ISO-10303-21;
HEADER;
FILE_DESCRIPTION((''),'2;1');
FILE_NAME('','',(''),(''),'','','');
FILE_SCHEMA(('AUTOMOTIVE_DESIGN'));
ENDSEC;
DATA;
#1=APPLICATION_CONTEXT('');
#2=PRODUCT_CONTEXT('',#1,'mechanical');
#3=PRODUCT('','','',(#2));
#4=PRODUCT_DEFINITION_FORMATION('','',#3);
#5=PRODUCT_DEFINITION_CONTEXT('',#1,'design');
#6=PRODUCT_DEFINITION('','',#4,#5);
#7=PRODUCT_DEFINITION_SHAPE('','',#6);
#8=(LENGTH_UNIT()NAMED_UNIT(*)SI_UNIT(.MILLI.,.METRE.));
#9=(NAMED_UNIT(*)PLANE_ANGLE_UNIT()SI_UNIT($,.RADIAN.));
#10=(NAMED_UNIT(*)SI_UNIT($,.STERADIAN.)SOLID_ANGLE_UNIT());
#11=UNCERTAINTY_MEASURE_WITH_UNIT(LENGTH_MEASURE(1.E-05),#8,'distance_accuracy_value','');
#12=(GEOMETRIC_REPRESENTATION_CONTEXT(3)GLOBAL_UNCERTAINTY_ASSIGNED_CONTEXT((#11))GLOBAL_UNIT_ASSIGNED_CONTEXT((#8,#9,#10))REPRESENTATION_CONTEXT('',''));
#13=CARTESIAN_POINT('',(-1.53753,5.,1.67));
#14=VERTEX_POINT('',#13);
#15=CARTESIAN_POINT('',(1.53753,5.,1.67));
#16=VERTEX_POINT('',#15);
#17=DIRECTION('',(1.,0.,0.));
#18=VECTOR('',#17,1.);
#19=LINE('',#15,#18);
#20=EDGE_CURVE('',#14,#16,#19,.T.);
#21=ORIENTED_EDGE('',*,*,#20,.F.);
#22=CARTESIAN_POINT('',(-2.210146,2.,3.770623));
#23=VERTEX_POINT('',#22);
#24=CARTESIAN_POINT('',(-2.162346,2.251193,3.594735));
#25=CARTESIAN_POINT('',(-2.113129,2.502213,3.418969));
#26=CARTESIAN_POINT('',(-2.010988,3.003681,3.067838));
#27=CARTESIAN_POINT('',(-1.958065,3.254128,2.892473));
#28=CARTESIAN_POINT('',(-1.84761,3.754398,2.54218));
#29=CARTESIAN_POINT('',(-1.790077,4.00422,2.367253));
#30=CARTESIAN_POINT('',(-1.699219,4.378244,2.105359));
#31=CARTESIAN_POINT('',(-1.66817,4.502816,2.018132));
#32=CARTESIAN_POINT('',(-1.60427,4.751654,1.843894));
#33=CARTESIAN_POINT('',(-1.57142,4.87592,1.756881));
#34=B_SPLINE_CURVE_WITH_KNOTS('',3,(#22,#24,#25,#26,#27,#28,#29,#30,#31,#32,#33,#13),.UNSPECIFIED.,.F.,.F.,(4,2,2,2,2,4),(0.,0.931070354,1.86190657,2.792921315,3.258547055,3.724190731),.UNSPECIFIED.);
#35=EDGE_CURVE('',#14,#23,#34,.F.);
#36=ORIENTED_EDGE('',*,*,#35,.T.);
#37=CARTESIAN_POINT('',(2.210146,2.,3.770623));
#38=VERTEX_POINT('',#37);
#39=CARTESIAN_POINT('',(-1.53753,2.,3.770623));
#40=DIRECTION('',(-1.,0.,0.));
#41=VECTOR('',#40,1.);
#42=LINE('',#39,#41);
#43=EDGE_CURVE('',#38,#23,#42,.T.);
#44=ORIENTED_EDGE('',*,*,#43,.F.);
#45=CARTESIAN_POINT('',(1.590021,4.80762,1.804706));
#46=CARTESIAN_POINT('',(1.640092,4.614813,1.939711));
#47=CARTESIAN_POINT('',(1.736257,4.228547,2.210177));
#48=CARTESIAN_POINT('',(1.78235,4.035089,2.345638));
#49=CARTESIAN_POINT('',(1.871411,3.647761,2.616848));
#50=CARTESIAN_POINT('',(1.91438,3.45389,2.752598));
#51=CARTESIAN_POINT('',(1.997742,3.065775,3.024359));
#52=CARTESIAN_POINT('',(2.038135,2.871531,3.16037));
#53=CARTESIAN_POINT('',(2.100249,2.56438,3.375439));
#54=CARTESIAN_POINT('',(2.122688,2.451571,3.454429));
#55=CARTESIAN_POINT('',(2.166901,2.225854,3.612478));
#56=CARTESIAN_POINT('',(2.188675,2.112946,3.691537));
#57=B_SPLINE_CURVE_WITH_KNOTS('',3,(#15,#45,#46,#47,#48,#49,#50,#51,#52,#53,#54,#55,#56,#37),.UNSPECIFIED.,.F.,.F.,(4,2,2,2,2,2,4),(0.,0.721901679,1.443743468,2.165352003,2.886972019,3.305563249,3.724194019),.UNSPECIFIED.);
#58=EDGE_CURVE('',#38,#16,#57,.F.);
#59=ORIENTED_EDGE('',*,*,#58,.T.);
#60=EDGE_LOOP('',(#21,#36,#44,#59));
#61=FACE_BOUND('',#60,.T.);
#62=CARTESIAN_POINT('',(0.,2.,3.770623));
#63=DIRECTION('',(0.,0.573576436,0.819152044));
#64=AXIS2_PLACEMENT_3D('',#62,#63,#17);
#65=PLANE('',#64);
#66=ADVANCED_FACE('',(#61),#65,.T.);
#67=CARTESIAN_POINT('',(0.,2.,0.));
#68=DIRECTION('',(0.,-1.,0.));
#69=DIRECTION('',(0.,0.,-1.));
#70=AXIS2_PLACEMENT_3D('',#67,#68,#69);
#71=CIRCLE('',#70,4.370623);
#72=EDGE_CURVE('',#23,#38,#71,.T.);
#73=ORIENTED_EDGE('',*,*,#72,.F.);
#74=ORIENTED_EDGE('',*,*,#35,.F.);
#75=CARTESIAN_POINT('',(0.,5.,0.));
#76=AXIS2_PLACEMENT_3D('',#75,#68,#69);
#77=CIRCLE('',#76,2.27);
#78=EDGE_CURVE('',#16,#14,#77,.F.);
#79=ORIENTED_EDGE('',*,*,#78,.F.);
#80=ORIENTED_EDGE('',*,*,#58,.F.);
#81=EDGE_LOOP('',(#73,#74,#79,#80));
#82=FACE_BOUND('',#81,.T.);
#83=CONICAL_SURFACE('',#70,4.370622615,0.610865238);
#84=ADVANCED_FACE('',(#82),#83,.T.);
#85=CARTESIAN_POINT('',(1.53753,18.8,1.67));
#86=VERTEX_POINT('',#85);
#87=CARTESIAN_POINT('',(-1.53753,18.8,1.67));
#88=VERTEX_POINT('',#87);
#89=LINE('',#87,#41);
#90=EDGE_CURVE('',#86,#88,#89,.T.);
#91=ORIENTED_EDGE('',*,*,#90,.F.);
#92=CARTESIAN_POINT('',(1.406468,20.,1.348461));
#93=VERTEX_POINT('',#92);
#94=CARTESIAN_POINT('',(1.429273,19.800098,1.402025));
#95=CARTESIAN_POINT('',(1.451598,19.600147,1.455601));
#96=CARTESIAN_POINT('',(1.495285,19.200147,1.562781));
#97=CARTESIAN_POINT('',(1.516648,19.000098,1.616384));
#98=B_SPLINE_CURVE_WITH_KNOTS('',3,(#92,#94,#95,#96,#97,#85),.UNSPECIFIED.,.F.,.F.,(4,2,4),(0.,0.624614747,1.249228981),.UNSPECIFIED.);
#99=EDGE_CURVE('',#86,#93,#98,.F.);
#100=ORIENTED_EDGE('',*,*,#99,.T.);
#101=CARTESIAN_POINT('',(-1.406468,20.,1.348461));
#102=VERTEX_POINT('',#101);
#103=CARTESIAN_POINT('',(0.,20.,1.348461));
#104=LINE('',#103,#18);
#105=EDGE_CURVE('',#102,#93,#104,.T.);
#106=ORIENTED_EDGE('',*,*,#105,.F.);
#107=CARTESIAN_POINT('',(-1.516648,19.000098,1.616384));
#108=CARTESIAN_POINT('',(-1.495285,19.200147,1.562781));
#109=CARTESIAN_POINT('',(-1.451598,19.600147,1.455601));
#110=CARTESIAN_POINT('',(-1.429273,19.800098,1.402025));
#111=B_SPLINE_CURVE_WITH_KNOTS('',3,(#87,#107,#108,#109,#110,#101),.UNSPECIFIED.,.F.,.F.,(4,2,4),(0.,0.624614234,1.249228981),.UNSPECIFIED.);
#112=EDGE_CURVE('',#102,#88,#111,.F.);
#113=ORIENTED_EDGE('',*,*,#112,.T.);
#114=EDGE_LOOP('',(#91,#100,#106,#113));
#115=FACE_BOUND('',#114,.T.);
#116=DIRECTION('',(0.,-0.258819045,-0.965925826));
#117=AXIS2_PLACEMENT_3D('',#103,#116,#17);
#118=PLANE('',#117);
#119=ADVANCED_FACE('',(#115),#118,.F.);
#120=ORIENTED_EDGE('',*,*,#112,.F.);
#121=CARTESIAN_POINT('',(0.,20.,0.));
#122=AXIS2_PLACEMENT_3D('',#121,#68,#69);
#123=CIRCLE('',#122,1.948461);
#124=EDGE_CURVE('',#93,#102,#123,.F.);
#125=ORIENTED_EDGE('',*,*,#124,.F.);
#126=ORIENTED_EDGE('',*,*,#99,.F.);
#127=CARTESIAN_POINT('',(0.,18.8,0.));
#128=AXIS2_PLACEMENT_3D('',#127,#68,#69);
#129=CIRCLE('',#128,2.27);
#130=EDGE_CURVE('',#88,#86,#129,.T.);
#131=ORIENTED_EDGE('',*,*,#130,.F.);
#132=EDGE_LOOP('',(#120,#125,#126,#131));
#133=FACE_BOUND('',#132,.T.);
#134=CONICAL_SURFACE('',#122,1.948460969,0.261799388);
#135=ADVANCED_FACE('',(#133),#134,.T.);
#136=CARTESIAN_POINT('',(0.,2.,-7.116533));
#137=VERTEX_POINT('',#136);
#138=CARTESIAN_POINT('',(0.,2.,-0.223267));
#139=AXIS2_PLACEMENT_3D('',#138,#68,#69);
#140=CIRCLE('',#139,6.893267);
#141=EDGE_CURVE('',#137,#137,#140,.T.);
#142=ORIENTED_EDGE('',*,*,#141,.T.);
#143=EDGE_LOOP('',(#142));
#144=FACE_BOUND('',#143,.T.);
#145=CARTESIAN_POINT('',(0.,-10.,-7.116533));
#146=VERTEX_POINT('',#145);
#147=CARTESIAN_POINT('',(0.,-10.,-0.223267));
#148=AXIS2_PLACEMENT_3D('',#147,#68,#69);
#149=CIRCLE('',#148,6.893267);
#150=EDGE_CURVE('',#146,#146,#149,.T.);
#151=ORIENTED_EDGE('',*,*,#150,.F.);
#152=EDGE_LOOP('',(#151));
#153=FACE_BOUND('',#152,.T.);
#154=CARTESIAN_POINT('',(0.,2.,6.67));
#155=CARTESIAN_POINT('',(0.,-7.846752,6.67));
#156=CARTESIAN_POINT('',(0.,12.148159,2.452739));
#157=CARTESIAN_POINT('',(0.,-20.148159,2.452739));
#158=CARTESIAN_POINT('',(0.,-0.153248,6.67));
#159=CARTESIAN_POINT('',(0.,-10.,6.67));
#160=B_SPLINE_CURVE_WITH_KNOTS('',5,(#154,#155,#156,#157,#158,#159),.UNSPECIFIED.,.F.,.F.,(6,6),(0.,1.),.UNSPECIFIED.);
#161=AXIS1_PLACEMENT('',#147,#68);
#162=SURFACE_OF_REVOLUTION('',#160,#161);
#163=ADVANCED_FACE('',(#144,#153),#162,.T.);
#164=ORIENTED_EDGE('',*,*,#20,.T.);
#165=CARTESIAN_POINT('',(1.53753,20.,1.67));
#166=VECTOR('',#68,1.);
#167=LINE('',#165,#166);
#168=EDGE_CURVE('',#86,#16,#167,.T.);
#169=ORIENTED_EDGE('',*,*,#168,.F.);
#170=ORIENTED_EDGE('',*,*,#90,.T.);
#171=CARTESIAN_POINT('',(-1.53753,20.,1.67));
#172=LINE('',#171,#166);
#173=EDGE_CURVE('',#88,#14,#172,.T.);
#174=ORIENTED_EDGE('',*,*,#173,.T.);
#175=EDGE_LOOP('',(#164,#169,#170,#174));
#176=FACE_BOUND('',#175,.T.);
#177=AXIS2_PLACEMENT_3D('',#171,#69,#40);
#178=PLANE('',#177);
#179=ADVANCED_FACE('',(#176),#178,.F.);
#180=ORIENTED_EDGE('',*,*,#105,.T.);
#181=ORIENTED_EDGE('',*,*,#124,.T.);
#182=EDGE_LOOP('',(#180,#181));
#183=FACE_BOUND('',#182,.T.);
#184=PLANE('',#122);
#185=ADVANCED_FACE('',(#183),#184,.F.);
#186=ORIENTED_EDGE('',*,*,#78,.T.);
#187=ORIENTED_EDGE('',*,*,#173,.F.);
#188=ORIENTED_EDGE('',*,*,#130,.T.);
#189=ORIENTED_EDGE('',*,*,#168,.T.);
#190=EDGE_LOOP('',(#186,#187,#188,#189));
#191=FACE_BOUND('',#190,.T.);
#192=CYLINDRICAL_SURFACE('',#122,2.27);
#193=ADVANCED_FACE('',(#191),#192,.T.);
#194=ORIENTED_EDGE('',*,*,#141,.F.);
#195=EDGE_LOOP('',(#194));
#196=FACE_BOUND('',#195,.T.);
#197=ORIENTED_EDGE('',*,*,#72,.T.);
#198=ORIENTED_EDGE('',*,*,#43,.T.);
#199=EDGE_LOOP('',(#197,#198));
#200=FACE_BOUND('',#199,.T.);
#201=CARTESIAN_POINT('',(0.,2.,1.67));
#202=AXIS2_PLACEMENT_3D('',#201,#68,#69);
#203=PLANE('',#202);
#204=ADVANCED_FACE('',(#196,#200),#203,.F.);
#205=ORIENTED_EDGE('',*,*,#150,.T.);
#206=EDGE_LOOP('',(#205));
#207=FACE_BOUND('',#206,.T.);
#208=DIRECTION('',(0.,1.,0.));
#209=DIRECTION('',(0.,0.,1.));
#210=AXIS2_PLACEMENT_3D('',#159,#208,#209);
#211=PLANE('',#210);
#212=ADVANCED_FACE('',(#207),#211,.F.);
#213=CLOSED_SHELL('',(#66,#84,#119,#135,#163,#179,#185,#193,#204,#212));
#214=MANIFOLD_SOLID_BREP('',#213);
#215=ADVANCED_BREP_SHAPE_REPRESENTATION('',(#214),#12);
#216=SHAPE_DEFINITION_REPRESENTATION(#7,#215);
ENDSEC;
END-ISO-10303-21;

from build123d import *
from OCP.BRepFilletAPI import BRepFilletAPI_MakeChamfer

# Parameters (mm, degrees)
BOSS_EXTRUDE1_DEPTH = 20
CHAMFER1_SIZE       = 1.2
CHAMFER1_SIZE2      = 0.321539031
CHAMFER2_SIZE       = 3
CHAMFER2_SIZE2      = 2.100622615


# Read off the part's stored shape, not the designer's step: Revolve1
with BuildPart() as part:
    # Sketch1 → Boss-Extrude1 (new body)
    with BuildSketch(Plane(origin=(0, 0, 0), x_dir=(1, 0, 0), z_dir=(0, 1, 0))):
        with BuildLine():
            Line((-1.537530488, -1.67), (1.537530488, -1.67))
            ThreePointArc((1.537530488, -1.67), (0, 2.27), (-1.537530488, -1.67))
        make_face()
    extrude(amount=BOSS_EXTRUDE1_DEPTH)

    # Chamfer1: one chamfer whose edges measure the first distance from different faces: ONE call of the kernel's chamfer builder (chamfer() names one face for all edges)
    chamfer1_edges_1 = [part.edges().sort_by_distance(p)[0] for p in [
        (0, 20, -2.27),
    ]]
    chamfer1_side_1 = [part.faces().sort_by_distance(p)[0] for p in [
        (0, 10, -2.27),
    ]]
    chamfer1_edges_2 = [part.edges().sort_by_distance(p)[0] for p in [
        (0, 20, 1.67),
    ]]
    chamfer1_side_2 = [part.faces().sort_by_distance(p)[0] for p in [
        (0, 10, 1.67),
    ]]
    chamfer1 = BRepFilletAPI_MakeChamfer(part.part.solid().wrapped)
    for e in chamfer1_edges_1:
        chamfer1.Add(CHAMFER1_SIZE, CHAMFER1_SIZE2, e.wrapped, chamfer1_side_1[0].wrapped)  # the first distance lies on this face
    for e in chamfer1_edges_2:
        chamfer1.Add(CHAMFER1_SIZE, CHAMFER1_SIZE2, e.wrapped, chamfer1_side_2[0].wrapped)  # the first distance lies on this face
    add(Compound.cast(chamfer1.Shape()), mode=Mode.REPLACE)

    # Revolve1 outline → Revolve1 (revolve)
    with BuildSketch(Plane.XY.offset(-0.223266571)):
        with BuildLine():
            Line((6.893266571, 2), (1.893266571, 2))
            Line((1.893266571, 2), (1.893266571, 0))
            Line((1.893266571, 0), (0, 0))
            Line((0, 0), (0, -10))
            Line((0, -10), (6.893266571, -10))
            add(Edge.make_bspline(
                [(6.893266571, -10), (6.893266571, -0.153248468), (2.676005531, -20.148158745), (2.676005531, 12.148158745), (6.893266571, -7.846751532), (6.893266571, 2)],
                knots=[0.057927251, 0.057927251, 0.057927251, 0.057927251, 0.057927251, 0.057927251, 1.057927251, 1.057927251, 1.057927251, 1.057927251, 1.057927251, 1.057927251], degree=5))
        make_face()
    revolve(axis=Axis((0, 0, -0.223266571), (0, 1, 0)))

    # Chamfer2: one chamfer whose edges measure the first distance from different faces: ONE call of the kernel's chamfer builder (chamfer() names one face for all edges)
    chamfer2_edges_1 = [part.edges().sort_by_distance(p)[0] for p in [
        (0, 2, 1.67),
    ]]
    chamfer2_side_1 = [part.faces().sort_by_distance(p)[0] for p in [
        (0, 10.4, 1.67),
    ]]
    chamfer2_edges_2 = [part.edges().sort_by_distance(p)[0] for p in [
        (0, 2, -2.27),
    ]]
    chamfer2_side_2 = [part.faces().sort_by_distance(p)[0] for p in [
        (0, 10.4, -2.27),
    ]]
    chamfer2 = BRepFilletAPI_MakeChamfer(part.part.solid().wrapped)
    for e in chamfer2_edges_1:
        chamfer2.Add(CHAMFER2_SIZE, CHAMFER2_SIZE2, e.wrapped, chamfer2_side_1[0].wrapped)  # the first distance lies on this face
    for e in chamfer2_edges_2:
        chamfer2.Add(CHAMFER2_SIZE, CHAMFER2_SIZE2, e.wrapped, chamfer2_side_2[0].wrapped)  # the first distance lies on this face
    add(Compound.cast(chamfer2.Shape()), mode=Mode.REPLACE)


solid = part.part
